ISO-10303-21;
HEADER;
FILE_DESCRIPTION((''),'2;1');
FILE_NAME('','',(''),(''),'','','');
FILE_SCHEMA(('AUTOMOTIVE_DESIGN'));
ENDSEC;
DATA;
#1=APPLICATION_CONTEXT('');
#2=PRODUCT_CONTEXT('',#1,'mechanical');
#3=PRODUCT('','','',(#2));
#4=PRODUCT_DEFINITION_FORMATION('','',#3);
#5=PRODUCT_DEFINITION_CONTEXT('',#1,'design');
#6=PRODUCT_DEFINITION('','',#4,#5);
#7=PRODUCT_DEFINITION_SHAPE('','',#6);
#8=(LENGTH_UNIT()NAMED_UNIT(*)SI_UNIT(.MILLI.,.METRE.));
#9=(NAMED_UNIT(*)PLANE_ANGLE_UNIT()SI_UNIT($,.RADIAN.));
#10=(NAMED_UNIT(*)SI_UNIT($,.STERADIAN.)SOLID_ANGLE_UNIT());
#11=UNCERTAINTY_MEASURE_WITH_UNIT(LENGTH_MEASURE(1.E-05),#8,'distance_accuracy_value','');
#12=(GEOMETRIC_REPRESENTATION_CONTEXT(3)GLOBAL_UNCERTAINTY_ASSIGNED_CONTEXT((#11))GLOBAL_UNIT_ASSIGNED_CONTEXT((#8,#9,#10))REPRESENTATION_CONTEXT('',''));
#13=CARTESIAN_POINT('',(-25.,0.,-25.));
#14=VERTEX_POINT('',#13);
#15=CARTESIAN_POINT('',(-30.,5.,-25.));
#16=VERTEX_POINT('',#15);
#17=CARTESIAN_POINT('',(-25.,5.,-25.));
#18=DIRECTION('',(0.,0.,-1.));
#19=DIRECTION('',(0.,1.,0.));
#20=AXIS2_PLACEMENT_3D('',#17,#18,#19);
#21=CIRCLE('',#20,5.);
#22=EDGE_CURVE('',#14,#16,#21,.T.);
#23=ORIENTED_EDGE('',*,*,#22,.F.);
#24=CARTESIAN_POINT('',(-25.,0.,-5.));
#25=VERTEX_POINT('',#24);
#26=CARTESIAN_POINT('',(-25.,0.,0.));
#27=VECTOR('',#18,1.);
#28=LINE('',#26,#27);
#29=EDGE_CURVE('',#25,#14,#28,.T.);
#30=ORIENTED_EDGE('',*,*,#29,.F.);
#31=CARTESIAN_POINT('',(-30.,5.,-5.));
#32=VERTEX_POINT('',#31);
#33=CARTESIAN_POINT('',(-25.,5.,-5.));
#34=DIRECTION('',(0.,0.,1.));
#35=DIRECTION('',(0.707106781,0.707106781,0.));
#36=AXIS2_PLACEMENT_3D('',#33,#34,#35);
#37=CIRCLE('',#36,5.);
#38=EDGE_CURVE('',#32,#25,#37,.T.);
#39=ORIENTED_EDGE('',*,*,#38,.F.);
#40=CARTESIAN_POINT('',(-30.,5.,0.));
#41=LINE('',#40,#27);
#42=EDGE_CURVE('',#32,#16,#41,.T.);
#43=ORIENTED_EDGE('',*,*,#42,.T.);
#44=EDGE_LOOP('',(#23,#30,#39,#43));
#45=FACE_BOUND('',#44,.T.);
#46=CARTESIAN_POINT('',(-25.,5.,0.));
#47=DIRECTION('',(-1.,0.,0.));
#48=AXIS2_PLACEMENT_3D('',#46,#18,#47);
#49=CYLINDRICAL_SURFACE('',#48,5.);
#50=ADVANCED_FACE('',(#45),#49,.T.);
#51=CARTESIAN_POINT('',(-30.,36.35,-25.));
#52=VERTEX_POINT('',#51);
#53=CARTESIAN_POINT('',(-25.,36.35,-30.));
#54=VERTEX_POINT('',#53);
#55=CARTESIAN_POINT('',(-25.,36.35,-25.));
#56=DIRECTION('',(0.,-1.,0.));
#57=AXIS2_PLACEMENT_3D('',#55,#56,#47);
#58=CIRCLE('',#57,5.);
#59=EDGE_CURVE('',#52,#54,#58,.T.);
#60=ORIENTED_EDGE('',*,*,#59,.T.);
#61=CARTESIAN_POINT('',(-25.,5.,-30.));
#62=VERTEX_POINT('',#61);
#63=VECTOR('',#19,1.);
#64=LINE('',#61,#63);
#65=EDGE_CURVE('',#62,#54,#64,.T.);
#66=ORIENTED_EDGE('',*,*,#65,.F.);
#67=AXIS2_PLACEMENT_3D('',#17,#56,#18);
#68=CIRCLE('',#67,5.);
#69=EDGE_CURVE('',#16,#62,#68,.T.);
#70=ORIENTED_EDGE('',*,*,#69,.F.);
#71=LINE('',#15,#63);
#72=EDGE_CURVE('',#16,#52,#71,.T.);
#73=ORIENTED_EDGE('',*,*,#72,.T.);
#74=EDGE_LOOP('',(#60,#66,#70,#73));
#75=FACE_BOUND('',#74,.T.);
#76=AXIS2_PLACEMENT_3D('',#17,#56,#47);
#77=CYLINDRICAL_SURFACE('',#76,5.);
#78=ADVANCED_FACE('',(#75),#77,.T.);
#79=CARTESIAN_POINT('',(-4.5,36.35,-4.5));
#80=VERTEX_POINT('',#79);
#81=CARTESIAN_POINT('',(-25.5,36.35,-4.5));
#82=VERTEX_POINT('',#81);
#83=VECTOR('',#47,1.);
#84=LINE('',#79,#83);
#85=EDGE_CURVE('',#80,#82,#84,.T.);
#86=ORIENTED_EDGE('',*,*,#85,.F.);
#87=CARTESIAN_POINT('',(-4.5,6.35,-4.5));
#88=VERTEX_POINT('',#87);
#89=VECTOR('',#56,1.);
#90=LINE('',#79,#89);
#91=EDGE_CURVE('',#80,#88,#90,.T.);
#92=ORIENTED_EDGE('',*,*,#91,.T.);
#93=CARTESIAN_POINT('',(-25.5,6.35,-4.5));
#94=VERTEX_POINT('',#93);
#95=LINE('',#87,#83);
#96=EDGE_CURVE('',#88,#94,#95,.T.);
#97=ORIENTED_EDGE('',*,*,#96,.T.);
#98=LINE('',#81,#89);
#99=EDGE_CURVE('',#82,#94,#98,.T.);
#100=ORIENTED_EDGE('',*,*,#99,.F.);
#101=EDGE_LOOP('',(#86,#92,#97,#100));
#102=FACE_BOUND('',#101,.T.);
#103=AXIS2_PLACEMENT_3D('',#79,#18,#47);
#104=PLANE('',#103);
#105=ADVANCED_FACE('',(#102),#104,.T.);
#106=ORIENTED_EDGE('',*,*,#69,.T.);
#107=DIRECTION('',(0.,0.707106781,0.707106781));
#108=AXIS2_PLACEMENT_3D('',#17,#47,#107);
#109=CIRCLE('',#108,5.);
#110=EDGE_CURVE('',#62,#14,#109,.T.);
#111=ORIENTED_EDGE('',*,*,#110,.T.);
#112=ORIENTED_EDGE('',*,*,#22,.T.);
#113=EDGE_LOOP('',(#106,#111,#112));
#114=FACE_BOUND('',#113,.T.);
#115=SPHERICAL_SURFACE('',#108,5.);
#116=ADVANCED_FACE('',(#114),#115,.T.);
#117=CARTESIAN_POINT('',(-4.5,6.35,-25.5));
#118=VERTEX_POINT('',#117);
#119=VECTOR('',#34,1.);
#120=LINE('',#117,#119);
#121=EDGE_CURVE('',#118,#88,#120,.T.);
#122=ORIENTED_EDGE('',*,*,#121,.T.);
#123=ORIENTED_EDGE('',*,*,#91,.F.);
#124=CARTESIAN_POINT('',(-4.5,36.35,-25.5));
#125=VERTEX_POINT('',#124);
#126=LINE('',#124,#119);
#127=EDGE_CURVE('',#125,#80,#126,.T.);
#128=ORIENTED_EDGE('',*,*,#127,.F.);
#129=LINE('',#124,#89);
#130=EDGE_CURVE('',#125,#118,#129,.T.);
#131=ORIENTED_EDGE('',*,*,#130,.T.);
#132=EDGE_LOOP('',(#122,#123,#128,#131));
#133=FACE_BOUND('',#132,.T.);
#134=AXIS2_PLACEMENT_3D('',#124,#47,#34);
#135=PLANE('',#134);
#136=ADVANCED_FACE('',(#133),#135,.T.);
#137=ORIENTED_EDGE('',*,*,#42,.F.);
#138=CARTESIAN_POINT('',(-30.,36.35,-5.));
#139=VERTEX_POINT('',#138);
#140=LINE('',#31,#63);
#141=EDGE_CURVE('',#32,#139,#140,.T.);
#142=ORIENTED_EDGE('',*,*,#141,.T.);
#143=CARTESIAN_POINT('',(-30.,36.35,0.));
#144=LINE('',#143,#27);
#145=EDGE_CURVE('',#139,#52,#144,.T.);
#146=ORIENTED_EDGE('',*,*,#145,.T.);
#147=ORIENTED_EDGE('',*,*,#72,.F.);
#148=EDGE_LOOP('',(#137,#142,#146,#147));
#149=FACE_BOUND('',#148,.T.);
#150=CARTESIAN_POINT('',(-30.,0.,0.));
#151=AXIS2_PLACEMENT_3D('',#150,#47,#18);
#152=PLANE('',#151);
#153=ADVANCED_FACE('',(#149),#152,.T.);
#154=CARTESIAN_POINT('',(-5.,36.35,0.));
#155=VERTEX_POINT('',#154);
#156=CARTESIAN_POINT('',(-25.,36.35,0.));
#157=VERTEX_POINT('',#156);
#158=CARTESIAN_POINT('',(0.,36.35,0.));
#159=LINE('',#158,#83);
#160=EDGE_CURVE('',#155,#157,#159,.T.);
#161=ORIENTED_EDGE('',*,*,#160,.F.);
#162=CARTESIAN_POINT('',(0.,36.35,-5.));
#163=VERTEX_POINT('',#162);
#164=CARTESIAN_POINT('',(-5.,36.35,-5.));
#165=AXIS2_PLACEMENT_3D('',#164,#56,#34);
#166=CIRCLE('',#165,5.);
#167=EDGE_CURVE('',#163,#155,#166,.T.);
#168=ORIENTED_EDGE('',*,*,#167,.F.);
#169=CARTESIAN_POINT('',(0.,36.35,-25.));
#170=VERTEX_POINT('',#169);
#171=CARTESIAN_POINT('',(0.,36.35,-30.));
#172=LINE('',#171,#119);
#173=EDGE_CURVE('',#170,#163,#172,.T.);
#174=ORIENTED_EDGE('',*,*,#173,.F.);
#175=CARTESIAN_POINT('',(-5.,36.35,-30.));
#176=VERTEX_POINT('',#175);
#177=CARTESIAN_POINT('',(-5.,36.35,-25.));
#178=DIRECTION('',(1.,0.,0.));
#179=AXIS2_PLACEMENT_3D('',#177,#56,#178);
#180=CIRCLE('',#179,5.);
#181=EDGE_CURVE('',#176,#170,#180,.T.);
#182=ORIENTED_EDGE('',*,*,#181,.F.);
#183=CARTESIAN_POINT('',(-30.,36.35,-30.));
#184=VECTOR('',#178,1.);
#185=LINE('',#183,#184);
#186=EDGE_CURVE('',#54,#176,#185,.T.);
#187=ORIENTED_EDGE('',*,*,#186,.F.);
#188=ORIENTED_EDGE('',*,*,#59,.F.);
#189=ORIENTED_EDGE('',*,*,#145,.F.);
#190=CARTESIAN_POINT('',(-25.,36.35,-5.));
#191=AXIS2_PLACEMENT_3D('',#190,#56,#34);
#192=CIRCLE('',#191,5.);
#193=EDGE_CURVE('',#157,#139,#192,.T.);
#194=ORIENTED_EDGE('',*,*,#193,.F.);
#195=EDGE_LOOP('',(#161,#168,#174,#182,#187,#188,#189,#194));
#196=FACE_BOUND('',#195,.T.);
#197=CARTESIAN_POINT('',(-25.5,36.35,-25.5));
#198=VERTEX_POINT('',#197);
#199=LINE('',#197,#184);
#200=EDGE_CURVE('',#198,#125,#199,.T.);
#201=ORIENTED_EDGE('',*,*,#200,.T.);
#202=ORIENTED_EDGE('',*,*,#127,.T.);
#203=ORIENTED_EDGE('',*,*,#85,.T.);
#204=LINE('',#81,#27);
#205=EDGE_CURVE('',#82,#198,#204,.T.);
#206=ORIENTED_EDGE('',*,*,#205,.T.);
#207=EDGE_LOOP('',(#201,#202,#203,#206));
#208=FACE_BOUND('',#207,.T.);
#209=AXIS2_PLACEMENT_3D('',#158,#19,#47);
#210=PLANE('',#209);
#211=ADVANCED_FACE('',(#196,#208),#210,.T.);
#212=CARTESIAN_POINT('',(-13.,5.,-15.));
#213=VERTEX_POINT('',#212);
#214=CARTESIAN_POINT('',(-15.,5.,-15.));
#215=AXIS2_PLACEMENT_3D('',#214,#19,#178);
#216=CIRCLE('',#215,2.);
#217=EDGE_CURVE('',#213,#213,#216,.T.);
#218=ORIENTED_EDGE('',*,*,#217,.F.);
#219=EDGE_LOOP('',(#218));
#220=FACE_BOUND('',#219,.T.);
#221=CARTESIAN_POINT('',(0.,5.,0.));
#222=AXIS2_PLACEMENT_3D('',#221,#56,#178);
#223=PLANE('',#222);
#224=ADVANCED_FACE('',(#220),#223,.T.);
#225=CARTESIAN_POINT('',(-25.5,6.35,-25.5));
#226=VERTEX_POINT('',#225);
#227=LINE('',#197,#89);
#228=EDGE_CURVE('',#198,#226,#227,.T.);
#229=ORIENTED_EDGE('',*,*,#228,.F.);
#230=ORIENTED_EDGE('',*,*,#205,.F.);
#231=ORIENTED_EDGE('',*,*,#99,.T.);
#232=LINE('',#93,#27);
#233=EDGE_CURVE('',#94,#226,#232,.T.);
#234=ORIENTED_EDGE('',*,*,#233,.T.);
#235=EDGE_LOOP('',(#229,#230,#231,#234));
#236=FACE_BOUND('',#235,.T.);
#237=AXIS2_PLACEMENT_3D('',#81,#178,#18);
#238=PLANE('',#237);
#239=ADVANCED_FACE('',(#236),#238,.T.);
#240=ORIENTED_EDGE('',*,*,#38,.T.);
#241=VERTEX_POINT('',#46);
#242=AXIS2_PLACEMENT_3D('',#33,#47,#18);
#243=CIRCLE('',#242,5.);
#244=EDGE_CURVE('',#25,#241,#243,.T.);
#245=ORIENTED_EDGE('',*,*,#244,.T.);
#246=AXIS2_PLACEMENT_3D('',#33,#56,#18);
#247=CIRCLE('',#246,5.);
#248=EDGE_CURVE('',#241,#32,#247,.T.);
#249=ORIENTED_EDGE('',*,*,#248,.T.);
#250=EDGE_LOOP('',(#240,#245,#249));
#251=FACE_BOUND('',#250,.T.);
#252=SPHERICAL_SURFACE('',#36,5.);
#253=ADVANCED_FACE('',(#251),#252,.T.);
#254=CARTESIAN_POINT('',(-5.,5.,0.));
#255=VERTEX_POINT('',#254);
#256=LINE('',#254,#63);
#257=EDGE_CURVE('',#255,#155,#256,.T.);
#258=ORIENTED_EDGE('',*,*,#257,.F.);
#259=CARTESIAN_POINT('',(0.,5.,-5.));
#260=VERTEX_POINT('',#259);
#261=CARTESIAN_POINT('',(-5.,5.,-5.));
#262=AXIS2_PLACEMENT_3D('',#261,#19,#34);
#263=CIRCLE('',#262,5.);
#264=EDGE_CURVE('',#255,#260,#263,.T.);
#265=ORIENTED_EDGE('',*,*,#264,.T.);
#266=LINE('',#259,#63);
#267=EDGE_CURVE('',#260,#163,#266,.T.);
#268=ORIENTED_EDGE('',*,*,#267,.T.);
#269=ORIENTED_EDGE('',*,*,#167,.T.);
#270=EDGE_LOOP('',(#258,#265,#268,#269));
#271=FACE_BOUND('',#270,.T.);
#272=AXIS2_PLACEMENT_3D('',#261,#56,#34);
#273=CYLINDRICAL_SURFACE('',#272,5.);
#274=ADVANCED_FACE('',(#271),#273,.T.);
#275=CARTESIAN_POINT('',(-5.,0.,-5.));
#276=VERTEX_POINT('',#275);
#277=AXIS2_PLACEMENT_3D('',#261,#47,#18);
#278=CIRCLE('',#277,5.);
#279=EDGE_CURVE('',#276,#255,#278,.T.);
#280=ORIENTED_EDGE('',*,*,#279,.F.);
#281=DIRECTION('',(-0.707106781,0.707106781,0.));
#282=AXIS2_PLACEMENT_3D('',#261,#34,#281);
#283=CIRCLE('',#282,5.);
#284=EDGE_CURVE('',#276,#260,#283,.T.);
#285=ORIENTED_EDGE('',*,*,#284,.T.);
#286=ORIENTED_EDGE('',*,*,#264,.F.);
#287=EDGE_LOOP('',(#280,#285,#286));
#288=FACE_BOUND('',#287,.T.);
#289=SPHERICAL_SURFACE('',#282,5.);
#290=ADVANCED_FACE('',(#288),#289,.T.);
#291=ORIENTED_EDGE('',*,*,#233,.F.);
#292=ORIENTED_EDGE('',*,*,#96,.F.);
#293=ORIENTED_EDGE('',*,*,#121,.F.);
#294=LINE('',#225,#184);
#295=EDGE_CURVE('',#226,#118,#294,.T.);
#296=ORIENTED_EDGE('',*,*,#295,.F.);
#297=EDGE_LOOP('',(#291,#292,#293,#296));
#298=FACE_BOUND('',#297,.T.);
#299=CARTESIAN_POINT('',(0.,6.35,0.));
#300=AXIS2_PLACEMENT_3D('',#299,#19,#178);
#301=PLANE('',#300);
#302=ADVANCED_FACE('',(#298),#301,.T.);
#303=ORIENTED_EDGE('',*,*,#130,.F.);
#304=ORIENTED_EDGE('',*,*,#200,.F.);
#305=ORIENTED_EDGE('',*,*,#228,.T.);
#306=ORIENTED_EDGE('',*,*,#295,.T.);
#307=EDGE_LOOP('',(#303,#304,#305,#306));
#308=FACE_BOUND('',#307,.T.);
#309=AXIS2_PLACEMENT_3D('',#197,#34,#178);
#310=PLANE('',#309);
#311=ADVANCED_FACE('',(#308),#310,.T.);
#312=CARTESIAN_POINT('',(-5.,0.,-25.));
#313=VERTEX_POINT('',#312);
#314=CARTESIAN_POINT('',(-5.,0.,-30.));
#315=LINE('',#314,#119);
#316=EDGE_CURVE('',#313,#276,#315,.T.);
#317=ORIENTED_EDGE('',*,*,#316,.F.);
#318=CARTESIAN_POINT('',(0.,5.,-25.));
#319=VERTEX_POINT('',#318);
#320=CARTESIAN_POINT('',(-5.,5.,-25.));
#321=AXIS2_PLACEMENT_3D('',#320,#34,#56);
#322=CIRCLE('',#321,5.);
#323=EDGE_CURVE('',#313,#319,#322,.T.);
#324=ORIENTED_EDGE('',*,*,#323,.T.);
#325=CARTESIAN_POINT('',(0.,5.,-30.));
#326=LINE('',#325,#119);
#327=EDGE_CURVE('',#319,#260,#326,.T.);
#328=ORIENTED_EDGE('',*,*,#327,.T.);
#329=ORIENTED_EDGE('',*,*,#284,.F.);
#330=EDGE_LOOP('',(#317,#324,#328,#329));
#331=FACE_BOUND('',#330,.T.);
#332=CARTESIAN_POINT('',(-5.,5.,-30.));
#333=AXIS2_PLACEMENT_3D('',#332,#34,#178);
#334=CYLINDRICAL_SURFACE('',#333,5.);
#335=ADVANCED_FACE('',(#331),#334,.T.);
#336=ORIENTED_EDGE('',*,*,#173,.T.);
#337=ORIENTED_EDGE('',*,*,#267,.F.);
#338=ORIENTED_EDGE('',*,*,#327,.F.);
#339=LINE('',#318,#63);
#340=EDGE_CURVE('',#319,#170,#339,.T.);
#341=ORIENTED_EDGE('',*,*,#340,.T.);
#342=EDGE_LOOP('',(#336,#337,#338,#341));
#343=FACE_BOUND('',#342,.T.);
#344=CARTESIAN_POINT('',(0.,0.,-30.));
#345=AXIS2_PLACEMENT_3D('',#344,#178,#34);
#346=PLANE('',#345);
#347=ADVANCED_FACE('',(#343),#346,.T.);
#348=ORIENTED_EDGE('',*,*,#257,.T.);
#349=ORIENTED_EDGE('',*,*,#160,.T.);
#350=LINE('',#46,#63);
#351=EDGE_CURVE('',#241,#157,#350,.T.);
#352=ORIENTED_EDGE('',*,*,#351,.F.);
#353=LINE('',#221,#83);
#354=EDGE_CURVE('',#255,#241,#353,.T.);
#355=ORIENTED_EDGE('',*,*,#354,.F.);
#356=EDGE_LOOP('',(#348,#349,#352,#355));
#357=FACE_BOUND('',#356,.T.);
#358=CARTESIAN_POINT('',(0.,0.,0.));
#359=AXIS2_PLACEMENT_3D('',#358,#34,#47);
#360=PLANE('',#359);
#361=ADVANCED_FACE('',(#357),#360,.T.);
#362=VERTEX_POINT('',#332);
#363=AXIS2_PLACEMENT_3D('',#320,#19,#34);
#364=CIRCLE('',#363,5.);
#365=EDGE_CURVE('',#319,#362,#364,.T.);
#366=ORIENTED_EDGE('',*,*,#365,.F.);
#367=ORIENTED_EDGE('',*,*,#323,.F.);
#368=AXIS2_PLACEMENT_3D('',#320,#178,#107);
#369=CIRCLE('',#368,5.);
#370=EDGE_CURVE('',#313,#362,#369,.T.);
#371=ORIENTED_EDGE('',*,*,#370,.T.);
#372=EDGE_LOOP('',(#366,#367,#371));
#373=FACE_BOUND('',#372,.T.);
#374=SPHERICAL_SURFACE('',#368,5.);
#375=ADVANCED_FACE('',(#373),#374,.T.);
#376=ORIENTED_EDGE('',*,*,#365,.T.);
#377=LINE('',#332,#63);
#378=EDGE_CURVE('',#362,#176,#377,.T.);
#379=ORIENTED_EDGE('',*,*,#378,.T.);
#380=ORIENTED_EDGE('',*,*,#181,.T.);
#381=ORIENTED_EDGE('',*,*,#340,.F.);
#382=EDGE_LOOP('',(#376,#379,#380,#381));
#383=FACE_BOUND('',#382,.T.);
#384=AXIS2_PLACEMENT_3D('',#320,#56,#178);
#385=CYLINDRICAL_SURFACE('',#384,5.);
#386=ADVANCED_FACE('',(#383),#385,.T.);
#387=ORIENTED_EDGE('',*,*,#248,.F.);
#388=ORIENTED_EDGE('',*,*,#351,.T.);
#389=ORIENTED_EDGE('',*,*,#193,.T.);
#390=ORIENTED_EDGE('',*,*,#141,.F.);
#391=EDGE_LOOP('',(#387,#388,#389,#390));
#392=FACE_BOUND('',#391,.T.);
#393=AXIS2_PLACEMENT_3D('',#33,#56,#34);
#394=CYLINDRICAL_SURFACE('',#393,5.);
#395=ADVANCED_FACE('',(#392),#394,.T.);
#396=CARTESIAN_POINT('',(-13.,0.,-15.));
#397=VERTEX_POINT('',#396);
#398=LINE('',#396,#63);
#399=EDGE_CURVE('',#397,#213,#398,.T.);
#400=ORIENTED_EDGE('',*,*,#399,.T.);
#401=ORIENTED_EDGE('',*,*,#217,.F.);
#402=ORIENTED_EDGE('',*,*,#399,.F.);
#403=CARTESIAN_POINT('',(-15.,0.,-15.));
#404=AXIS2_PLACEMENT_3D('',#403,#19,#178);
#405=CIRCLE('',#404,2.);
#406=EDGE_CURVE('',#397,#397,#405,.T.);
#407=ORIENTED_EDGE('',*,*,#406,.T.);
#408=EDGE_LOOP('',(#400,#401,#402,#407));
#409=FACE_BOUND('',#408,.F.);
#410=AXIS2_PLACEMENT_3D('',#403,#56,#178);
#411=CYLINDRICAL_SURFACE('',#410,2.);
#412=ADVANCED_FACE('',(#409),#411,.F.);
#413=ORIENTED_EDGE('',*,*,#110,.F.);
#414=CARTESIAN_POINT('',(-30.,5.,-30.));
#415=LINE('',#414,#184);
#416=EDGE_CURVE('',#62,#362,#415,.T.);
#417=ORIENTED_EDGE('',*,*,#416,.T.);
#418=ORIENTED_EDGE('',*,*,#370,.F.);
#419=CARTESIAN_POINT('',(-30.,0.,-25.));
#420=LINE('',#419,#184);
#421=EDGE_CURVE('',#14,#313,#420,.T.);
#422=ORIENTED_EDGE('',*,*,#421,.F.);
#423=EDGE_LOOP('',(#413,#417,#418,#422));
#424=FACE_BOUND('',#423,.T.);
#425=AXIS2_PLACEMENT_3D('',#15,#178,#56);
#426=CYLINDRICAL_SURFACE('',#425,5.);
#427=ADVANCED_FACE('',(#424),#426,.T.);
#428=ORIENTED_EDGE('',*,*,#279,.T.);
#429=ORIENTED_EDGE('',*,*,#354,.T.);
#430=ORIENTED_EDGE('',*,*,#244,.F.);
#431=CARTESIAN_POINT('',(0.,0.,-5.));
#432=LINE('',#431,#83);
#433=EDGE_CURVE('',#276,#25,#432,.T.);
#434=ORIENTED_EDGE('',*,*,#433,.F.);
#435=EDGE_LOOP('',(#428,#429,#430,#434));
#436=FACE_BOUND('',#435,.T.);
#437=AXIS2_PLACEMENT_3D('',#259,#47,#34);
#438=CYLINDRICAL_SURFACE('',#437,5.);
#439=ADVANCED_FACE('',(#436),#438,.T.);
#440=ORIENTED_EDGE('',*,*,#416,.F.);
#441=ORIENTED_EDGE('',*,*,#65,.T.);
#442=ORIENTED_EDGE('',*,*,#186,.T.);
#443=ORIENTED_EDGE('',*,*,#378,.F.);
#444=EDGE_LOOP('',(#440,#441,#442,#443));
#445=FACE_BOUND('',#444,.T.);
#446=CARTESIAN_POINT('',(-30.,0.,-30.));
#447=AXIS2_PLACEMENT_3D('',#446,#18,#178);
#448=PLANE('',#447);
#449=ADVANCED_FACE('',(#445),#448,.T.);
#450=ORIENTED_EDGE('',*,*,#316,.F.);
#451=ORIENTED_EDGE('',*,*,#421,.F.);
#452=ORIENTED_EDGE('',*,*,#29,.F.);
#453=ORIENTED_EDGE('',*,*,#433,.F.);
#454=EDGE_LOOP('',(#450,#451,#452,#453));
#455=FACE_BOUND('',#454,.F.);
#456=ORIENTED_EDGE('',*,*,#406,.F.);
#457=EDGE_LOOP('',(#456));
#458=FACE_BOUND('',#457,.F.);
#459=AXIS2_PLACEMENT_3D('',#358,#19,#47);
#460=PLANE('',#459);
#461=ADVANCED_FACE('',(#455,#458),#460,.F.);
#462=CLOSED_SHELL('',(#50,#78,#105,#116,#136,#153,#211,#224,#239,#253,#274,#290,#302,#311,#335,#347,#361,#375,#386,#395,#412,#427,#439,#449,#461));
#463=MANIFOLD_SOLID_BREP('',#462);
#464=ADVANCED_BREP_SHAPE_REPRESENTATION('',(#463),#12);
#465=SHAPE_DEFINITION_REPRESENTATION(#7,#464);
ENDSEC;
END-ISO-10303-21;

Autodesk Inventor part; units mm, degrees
ref_plane "YZ Plane" through (0, 0, 0) normal (1, 0, 0) x (0, 1, 0)
ref_plane "XZ Plane" through (0, 0, 0) normal (0, 1, 0) x (-1, 0, 0)
ref_plane "XY Plane" through (0, 0, 0) normal (0, 0, 1) x (1, 0, 0)
sketch "Sketch1" plane through (0, 0, 0) normal (0, 1, 0) x (-1, 0, 0)
  line L0 (0, 0) -> (30, 0)
  line L1 (30, 0) -> (30, -30)
  line L2 (30, -30) -> (0, -30)
  line L3 (0, -30) -> (0, 0)
  dimension "d0" = 30
  dimension "d1" = 30
extrude "Extrusion1" add sketch "Sketch1" along normal blind 36.35
sketch "Sketch2" plane through (0, 36.35, 0) normal (0, 1, 0) x (1, 0, 0)
  line L0 (0, 0) -> (0, 30) projected
  line L1 (0, 0) -> (0, 4.5)
  line L2 (0, 4.5) -> (-4.5, 4.5)
  line L3 (-4.5, 4.5) -> (-25.5, 4.5)
  line L4 (-25.5, 4.5) -> (-25.5, 25.5)
  line L5 (-25.5, 25.5) -> (-4.5, 25.5)
  line L6 (-4.5, 25.5) -> (-4.5, 4.5)
  dimension "d4" = 4.5
  dimension "d5" = 4.5
  dimension "d6" = 21
  dimension "d7" = 21
extrude "Extrusion2" cut sketch "Sketch2" against normal blind 30
sketch "Sketch3" plane through (0, 0, 0) normal (0, -1, 0) x (1, 0, 0)
  line L0 (0, 0) -> (-15, 0)
  line L1 (0, 0) -> (-30, 0) projected
  line L2 (-15, 0) -> (-15, -15)
  circle A0 centre (-15, -15) radius 2
  dimension "d10" = 15
  dimension "d11" = 4
extrude "Extrusion3" cut sketch "Sketch3" against normal blind 5
fillet "Fillet1" radius 5 4 edges at (0, 0, -15) (-15, 0, 0) (-15, 0, -30) (-30, 0, -15)
fillet "Fillet2" radius 5 8 edges at (-1.4645, 1.4645, -28.5355) (0, 20.675, -30) (-1.4645, 1.4645, -1.4645) (0, 20.675, 0) (-28.5355, 1.4645, -28.5355) (-30, 20.675, -30) (-28.5355, 1.4645, -1.4645) (-30, 20.675, 0)
properties part number "_25in_2020_Endcap"
